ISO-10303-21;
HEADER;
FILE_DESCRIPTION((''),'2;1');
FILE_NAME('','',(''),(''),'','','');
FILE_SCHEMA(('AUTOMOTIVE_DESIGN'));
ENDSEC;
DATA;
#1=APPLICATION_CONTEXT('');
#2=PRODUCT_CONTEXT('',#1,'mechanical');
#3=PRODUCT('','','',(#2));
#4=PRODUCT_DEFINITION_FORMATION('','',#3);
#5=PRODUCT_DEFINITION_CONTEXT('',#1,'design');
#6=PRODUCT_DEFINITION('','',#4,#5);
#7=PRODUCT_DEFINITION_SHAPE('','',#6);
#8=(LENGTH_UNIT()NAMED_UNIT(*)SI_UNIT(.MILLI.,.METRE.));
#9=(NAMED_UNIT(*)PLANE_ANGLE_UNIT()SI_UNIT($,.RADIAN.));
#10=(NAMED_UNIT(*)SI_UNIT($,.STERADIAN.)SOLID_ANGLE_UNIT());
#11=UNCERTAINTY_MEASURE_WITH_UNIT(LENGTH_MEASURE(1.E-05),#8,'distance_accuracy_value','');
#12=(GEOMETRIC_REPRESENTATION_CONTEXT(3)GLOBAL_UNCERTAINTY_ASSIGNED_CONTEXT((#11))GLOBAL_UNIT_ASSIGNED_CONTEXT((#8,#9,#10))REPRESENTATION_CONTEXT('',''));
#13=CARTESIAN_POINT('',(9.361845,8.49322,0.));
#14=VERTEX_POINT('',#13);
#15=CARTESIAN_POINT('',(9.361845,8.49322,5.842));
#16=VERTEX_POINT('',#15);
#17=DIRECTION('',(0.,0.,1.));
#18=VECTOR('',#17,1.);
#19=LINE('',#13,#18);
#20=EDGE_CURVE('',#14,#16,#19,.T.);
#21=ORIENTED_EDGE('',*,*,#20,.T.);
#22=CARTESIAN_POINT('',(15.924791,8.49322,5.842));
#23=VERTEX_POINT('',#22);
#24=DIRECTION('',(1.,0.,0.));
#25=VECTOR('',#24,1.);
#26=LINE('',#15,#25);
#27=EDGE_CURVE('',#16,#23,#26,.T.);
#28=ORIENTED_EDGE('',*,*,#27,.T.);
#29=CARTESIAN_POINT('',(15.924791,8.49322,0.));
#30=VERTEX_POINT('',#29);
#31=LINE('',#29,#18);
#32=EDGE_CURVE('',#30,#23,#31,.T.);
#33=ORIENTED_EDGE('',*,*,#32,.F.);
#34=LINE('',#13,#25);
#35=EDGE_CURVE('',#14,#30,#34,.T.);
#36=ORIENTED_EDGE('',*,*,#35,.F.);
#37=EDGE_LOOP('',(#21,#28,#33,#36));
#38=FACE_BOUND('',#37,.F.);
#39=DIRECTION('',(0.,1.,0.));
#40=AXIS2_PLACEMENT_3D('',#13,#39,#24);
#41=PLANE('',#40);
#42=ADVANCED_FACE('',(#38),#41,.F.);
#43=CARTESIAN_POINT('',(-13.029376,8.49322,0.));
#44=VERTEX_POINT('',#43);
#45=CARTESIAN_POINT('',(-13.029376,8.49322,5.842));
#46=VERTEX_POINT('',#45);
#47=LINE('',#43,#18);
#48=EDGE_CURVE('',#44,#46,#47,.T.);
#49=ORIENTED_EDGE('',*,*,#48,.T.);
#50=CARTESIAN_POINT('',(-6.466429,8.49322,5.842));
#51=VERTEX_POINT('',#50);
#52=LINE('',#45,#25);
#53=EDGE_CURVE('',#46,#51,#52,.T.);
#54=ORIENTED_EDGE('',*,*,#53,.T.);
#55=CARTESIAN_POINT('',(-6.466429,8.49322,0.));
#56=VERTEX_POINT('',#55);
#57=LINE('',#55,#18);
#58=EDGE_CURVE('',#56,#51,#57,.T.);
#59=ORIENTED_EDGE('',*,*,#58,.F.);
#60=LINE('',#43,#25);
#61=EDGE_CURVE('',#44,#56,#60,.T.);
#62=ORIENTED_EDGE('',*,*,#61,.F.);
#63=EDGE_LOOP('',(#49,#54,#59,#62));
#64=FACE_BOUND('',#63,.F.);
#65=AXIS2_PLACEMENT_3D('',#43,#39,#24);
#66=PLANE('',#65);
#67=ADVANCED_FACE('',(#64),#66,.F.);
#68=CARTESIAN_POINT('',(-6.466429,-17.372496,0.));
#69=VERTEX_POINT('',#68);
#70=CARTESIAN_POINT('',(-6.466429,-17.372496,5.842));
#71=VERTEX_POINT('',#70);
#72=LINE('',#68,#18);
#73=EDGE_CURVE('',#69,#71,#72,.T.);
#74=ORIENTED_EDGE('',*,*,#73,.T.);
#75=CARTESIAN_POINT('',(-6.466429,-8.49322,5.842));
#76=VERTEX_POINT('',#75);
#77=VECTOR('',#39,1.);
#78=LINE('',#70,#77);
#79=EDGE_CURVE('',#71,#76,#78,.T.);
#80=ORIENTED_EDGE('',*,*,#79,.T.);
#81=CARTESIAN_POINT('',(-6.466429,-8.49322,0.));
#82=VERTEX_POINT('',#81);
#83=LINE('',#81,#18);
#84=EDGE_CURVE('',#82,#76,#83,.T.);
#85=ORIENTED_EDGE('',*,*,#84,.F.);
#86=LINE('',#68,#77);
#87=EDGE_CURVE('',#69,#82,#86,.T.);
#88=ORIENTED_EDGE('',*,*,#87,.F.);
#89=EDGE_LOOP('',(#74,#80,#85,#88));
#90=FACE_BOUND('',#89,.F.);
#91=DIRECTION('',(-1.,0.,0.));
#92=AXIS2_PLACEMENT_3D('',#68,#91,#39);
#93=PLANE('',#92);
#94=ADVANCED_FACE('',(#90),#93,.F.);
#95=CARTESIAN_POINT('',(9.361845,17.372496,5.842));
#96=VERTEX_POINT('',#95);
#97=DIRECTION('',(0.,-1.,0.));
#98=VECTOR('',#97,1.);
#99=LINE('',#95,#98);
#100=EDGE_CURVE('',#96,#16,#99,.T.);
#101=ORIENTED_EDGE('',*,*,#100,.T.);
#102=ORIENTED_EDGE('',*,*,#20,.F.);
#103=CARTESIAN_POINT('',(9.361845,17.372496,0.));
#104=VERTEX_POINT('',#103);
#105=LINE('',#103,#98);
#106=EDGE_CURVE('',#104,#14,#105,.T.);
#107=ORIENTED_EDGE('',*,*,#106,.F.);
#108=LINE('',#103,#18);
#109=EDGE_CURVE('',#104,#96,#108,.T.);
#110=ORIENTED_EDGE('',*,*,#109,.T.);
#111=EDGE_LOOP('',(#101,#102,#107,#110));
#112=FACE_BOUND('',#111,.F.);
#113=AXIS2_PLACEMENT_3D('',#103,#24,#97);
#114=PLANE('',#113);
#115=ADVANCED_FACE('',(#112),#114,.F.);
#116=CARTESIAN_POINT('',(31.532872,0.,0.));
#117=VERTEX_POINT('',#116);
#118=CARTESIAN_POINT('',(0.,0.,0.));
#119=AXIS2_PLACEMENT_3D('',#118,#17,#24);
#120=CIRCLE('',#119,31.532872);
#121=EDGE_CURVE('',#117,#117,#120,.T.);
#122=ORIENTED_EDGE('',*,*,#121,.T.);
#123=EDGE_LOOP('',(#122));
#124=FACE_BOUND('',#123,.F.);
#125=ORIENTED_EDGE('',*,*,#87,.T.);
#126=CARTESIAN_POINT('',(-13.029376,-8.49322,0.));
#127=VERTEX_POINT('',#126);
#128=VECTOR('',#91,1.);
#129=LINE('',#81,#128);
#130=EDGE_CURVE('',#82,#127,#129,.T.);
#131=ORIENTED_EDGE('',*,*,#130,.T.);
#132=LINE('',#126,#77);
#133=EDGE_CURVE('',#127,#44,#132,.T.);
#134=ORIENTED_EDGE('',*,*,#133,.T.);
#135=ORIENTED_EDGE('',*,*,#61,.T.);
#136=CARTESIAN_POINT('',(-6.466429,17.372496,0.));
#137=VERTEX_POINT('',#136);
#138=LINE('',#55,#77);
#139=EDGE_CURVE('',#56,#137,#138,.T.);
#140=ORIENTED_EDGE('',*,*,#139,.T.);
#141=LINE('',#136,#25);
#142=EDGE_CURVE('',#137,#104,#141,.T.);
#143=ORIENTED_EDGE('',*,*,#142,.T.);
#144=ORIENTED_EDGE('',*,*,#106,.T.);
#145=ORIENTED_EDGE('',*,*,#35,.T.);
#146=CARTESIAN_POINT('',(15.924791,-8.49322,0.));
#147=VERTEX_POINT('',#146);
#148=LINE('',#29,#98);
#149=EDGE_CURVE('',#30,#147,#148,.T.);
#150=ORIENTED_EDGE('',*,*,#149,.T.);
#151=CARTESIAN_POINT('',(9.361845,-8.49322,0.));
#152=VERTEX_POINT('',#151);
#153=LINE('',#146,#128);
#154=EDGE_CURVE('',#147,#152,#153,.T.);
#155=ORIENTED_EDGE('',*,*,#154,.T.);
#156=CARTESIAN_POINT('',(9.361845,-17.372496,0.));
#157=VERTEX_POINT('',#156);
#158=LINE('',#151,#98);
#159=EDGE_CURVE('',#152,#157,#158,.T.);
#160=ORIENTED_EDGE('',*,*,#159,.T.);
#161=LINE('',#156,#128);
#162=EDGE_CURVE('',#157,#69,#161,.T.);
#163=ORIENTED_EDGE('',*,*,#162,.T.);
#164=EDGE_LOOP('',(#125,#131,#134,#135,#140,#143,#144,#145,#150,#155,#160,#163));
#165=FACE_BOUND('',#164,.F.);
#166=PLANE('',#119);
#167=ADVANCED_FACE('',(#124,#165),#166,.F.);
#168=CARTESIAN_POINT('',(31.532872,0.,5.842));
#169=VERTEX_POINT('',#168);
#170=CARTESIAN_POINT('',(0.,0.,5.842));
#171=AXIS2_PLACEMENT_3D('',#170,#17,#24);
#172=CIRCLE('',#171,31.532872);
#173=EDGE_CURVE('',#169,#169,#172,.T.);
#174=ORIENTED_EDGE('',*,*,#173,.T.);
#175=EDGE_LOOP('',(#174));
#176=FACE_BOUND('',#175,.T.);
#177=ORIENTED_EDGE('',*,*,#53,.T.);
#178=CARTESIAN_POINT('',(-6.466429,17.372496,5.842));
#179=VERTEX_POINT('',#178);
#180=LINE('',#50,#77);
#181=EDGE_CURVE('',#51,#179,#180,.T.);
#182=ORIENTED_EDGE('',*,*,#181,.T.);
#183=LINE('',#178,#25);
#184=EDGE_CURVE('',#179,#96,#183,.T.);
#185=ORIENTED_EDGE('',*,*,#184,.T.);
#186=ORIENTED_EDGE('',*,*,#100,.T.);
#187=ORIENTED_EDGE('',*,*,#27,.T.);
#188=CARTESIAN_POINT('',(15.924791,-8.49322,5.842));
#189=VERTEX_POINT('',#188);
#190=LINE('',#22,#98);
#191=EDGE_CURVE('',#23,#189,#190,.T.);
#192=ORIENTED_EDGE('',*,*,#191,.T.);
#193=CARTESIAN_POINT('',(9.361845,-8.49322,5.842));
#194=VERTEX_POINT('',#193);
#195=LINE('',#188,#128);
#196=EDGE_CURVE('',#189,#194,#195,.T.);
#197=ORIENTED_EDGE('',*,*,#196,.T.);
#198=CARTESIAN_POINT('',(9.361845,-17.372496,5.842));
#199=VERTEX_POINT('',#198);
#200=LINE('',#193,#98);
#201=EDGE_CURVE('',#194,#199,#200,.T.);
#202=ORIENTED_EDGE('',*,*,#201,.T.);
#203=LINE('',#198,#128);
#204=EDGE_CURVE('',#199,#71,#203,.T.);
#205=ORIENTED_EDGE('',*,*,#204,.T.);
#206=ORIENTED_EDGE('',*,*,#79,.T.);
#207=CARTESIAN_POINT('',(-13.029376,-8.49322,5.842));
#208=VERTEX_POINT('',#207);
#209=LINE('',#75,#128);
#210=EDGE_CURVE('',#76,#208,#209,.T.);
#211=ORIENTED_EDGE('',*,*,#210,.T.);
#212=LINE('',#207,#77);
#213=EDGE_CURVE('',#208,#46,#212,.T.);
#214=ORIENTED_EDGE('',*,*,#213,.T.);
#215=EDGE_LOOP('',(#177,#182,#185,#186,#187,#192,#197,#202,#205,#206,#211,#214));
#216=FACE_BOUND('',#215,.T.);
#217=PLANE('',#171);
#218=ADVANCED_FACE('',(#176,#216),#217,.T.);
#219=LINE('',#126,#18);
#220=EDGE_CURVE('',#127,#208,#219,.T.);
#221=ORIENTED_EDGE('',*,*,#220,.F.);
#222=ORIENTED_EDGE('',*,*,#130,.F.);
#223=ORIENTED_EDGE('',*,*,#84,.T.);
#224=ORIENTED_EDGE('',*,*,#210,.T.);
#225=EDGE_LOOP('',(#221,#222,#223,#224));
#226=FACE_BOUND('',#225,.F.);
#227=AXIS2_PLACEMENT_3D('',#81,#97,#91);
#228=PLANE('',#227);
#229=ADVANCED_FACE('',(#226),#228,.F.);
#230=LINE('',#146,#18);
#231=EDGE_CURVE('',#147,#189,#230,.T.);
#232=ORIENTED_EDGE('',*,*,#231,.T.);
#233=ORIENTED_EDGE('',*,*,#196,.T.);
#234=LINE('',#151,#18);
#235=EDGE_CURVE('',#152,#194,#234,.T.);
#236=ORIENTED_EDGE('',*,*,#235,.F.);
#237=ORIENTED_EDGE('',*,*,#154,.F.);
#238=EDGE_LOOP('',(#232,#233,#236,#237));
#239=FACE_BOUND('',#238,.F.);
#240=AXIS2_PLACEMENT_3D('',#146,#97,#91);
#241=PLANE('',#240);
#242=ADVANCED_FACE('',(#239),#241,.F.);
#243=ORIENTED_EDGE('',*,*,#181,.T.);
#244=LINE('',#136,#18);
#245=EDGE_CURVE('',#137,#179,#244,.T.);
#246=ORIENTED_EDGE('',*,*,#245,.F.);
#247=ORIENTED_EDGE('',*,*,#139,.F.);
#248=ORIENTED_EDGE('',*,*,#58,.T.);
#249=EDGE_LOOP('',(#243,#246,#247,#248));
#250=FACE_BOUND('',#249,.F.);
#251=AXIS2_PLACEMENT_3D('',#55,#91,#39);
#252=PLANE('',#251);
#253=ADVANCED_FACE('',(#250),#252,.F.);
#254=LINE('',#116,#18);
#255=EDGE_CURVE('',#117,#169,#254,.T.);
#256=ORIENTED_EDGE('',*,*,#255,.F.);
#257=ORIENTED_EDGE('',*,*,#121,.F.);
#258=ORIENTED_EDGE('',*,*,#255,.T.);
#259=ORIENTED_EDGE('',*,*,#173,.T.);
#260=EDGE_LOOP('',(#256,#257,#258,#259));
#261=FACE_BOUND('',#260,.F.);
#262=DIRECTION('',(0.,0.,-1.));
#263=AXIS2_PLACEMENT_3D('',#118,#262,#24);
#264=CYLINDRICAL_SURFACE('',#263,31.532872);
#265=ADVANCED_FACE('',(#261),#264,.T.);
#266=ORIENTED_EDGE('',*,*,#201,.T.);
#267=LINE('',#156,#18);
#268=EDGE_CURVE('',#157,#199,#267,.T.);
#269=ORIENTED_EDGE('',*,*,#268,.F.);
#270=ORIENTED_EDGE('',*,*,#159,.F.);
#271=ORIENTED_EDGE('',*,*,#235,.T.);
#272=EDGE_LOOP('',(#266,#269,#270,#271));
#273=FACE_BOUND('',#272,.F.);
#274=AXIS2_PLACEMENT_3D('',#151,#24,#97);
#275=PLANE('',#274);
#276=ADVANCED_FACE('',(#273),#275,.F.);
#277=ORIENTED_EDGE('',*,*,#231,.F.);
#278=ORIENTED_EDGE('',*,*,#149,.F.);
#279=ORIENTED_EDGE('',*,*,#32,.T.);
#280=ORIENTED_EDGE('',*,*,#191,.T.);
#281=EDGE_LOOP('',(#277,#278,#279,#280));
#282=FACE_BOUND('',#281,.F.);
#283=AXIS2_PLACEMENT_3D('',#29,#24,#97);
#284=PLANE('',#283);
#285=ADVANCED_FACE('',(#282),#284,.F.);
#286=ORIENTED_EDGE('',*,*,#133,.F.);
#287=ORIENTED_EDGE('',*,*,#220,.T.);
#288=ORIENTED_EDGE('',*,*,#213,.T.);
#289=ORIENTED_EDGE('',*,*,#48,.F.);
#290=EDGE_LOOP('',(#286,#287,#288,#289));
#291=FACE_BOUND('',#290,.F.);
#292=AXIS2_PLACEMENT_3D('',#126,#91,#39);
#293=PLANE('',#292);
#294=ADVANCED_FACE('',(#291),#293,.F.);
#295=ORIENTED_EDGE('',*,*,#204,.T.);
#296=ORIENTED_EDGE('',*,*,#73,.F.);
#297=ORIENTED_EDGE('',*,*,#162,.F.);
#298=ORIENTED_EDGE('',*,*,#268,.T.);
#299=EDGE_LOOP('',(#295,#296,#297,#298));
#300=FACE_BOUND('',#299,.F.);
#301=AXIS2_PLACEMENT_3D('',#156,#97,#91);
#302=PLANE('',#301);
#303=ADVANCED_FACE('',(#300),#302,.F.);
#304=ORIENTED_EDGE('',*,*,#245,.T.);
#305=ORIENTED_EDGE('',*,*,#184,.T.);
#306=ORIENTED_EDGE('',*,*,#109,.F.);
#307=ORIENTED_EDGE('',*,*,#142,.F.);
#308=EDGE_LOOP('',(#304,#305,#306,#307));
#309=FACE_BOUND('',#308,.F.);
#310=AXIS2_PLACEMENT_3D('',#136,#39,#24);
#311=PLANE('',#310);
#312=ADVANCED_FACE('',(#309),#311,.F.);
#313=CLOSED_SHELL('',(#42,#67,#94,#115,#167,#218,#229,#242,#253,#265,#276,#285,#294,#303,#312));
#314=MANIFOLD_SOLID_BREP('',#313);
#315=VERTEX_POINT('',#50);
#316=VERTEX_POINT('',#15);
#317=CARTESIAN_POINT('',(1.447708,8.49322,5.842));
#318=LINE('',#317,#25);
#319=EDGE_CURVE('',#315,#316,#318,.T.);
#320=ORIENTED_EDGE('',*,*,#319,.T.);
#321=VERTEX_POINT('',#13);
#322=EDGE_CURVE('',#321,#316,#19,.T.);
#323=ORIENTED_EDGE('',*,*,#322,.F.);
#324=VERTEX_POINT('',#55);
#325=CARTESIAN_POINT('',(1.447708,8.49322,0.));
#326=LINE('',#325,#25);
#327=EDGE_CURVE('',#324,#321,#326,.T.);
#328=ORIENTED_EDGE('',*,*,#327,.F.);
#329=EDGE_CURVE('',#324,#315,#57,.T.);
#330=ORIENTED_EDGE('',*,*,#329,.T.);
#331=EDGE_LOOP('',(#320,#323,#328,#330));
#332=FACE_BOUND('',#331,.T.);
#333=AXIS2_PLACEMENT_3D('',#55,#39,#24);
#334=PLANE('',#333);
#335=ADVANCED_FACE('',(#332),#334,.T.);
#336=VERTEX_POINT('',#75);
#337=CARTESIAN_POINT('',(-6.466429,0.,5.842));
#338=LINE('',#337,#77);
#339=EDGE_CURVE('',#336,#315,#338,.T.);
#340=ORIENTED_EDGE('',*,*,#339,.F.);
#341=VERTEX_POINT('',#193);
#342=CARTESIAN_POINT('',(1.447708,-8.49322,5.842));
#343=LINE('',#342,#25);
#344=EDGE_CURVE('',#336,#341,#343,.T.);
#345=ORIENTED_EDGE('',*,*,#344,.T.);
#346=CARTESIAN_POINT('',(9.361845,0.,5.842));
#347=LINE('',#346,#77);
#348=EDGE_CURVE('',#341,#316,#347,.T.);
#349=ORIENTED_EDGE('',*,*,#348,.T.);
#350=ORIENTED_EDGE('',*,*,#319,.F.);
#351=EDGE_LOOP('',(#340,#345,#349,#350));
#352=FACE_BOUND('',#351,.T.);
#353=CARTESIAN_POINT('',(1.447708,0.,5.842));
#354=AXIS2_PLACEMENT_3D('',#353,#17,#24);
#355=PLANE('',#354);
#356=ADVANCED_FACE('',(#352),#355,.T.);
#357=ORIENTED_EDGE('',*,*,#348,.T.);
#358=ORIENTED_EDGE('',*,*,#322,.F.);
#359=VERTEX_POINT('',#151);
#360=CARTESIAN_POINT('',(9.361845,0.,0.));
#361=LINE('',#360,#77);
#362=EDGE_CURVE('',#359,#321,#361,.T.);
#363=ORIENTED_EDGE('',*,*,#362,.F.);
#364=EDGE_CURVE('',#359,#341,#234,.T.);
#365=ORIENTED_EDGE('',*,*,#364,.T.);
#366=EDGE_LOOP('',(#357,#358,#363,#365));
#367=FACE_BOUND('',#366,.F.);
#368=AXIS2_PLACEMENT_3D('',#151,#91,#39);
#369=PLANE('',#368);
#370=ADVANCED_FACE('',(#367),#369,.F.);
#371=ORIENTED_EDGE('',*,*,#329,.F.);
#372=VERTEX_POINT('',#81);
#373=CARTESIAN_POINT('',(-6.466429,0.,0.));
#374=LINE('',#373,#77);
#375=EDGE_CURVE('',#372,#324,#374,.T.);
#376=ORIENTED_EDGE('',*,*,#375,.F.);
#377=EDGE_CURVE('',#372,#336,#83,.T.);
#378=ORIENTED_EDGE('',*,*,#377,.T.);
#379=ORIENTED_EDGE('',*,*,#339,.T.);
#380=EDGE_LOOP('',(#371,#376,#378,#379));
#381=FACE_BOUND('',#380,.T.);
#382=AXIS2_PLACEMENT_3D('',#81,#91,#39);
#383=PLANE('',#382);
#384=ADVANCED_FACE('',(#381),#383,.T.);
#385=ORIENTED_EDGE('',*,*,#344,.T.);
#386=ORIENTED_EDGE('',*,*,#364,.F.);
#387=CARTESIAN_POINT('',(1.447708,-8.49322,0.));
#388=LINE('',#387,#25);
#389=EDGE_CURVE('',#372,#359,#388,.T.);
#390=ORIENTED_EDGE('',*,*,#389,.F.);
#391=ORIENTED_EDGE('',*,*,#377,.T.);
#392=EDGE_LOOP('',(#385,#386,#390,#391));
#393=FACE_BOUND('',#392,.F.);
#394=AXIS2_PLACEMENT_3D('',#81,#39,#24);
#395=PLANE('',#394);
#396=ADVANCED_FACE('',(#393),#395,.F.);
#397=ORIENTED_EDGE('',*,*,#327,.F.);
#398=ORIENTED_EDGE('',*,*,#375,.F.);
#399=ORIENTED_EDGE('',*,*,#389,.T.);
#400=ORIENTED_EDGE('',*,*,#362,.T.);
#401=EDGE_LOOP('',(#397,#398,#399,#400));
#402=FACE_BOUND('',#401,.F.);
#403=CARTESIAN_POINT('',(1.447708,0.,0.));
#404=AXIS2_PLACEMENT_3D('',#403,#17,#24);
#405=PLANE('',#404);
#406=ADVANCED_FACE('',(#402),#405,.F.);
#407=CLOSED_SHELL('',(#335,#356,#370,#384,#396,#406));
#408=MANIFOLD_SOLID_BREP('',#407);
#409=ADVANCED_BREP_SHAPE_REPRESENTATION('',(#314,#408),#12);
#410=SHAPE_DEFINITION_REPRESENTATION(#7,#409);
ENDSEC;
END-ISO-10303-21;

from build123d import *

# Parameters (mm, degrees)
F0_W     = 15.8282737248
F0_H     = 16.9864408672
F1_DEPTH = 5.842
F0_R     = 31.5328718462


# Not quite as in the source:
# - a feature of the source that left no trace in its solid (it failed there, or was rolled back) is left out


with BuildPart() as f1:
    # F0 (on Top) → F1 (new body)
    with BuildSketch(Plane.XY):
        with Locations((1.4477076475, 0)):
            Rectangle(F0_W, F0_H)
    extrude(amount=F1_DEPTH)


with BuildPart() as f1b:
    # F0 (on Top) → F1, piece 2 (new body)
    with BuildSketch(Plane.XY):
        Circle(F0_R)
        Polygon((9.3618445098, 8.4932204336), (15.9247908741, 8.4932204336), (15.9247908741, -8.4932204336), (9.3618445098, -8.4932204336), (9.3618445098, -17.3724964261), (-6.4664292149, -17.3724964261), (-6.4664292149, -8.4932204336), (-13.0293755792, -8.4932204336), (-13.0293755792, 8.4932204336), (-6.4664292149, 8.4932204336), (-6.4664292149, 17.3724964261), (9.3618445098, 17.3724964261), align=None, mode=Mode.SUBTRACT)
    extrude(amount=F1_DEPTH)


solid = Compound([f1.part, f1b.part])
